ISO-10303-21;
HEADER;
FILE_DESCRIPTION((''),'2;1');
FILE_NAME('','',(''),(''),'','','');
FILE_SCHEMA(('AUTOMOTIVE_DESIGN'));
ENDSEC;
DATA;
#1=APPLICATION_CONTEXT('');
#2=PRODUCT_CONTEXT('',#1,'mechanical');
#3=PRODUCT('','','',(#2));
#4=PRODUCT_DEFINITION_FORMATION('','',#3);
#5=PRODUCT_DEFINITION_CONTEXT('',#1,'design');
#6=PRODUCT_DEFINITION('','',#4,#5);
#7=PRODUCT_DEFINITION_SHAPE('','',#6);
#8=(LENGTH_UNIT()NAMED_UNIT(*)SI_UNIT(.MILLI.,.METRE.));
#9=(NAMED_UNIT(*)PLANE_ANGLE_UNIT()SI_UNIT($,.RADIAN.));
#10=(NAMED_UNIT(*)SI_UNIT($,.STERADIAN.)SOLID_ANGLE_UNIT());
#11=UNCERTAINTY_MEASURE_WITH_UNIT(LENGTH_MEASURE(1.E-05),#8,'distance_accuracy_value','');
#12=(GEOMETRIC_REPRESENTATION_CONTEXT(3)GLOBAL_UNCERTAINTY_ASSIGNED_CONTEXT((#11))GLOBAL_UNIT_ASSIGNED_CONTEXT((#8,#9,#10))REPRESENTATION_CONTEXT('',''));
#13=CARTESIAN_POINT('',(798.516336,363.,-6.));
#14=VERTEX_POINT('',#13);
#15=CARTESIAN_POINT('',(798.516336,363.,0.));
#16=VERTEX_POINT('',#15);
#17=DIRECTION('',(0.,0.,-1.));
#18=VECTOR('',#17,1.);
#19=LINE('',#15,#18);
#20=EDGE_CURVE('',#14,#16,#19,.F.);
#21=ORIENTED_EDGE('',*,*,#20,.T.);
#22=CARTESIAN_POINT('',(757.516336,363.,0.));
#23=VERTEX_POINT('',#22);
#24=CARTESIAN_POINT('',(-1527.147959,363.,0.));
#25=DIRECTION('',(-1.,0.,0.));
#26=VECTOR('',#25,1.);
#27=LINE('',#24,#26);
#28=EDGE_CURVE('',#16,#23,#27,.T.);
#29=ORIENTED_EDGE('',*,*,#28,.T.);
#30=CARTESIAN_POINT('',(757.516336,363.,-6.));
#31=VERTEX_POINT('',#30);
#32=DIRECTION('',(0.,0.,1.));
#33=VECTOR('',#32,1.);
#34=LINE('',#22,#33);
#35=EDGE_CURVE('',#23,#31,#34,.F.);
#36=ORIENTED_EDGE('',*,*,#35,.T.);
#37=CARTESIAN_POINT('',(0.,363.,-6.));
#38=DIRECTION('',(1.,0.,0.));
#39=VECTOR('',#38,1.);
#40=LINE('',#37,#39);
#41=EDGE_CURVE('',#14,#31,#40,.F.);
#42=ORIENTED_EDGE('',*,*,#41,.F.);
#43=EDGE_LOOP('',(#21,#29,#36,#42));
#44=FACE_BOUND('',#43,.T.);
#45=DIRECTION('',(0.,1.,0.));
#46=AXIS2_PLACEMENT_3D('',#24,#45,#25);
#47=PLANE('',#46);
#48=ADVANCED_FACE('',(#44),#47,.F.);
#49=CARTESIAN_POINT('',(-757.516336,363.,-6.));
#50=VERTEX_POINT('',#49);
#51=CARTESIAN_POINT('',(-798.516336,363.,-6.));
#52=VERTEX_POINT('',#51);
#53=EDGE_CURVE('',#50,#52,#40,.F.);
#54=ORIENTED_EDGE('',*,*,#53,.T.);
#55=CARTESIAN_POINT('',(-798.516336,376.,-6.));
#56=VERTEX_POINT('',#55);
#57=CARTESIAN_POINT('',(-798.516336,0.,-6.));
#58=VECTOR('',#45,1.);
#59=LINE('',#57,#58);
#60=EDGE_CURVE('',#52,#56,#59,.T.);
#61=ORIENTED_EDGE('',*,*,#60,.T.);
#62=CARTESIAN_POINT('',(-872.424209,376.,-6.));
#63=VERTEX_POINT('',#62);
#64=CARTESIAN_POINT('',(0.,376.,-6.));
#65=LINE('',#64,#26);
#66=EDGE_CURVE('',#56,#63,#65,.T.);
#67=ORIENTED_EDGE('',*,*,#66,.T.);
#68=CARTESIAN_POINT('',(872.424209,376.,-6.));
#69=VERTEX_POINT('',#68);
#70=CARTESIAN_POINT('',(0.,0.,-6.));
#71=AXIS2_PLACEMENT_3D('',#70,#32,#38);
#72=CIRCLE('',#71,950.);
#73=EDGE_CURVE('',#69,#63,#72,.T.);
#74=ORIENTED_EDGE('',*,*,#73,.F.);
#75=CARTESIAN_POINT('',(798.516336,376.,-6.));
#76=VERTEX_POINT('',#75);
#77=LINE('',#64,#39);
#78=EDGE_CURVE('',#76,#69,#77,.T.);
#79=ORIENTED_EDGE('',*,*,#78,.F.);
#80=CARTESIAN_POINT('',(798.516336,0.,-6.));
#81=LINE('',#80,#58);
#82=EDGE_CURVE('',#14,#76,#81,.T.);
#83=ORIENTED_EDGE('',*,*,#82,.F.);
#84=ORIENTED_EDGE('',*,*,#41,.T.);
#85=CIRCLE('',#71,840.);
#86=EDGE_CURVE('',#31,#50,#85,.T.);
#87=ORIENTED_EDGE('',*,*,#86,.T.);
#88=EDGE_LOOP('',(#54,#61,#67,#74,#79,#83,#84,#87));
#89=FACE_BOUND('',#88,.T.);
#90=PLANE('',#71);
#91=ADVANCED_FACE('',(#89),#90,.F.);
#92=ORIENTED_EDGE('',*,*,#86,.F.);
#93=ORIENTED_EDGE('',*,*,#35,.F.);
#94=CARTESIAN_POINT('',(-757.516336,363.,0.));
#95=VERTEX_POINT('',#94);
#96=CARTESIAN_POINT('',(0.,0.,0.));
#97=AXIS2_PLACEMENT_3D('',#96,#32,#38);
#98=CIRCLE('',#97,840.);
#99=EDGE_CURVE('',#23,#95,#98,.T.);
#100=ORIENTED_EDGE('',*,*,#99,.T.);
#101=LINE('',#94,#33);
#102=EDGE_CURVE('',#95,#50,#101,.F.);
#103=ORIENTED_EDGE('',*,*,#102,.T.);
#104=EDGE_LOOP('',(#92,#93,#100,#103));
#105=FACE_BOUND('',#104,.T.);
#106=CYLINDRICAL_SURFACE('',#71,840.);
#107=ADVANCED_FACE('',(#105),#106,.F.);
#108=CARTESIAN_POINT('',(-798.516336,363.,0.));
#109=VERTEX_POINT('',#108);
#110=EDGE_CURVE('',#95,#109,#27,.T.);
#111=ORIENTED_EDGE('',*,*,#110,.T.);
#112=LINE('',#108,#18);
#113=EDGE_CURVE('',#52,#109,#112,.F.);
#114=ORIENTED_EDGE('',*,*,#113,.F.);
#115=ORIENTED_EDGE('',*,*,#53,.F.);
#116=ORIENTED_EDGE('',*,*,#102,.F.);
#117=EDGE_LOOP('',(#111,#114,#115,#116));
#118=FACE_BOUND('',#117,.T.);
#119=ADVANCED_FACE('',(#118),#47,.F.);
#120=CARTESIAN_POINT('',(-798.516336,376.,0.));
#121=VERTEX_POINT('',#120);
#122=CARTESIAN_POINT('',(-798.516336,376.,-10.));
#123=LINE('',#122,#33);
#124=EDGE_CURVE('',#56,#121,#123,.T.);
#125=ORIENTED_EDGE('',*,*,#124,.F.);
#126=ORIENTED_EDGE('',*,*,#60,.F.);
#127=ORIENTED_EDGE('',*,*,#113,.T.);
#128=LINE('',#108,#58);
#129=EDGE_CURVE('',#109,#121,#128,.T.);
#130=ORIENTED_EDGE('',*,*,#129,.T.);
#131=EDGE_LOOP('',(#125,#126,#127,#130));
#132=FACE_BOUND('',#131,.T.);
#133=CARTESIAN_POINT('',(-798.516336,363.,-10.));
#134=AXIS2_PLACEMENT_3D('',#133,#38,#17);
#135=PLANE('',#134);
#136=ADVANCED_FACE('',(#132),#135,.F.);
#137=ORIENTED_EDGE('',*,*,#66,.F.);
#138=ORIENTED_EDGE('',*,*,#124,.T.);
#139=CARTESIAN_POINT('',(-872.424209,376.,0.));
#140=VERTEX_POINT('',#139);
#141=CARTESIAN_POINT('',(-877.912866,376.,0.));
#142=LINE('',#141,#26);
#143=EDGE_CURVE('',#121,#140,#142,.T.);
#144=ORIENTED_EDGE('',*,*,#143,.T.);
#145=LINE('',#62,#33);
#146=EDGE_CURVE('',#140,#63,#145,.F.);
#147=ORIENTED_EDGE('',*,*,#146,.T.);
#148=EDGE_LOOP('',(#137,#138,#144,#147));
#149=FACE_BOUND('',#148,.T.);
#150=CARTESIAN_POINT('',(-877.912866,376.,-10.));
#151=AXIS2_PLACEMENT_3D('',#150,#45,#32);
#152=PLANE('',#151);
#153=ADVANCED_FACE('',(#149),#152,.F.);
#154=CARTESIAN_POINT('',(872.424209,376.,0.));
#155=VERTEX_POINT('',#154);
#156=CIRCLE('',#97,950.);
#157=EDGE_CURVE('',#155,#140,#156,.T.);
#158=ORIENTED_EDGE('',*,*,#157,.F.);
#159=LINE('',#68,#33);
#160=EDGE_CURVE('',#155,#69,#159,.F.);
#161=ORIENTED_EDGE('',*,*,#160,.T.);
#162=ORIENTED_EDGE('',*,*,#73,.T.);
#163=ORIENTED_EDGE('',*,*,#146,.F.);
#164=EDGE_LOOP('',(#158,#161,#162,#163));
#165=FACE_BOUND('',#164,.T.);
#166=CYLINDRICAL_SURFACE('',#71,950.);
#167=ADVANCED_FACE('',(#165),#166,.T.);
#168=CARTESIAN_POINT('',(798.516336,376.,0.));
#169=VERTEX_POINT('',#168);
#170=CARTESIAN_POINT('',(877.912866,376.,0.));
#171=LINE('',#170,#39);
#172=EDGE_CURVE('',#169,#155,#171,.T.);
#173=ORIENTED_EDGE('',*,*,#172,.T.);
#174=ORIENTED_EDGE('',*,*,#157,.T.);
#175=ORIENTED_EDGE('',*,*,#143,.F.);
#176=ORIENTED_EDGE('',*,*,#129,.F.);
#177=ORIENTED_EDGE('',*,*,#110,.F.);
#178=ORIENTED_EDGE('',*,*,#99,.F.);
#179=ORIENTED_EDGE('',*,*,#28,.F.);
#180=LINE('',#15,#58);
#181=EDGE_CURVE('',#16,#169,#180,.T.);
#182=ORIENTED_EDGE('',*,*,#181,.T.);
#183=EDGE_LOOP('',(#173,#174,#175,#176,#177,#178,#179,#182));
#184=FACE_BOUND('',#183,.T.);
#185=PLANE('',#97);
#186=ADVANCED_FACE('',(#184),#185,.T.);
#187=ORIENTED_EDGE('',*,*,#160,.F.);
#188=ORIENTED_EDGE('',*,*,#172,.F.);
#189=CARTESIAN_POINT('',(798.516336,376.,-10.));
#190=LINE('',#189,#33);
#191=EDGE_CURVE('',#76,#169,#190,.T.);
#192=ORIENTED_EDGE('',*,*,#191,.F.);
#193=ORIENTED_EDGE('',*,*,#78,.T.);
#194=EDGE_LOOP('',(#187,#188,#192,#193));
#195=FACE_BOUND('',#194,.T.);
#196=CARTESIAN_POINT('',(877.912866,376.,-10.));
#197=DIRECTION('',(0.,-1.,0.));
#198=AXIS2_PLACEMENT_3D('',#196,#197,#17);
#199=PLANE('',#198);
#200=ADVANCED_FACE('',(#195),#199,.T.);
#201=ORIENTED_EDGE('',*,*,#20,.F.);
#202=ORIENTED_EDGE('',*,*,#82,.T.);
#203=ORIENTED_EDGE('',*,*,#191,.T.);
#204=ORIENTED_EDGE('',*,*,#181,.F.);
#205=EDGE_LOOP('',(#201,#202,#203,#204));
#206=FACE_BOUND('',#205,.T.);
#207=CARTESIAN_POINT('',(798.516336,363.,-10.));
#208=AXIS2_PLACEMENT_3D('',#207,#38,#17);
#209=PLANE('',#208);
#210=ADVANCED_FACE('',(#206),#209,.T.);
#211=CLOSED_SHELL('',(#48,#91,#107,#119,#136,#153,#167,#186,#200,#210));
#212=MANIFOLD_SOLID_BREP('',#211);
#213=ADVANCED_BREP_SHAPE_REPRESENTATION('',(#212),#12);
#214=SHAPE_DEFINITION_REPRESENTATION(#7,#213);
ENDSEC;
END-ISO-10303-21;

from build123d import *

# Parameters (mm, degrees)
SKETCH1_R          = 950
SKETCH1_R_2        = 840
BASE_FLANGE1_DEPTH = 6
SKETCH6_W          = 2732.981099596
SKETCH6_H          = 1353.854573776
CUT_EXTRUDE1_DEPTH = 10
SKETCH8_W          = 79.396529378
SKETCH8_H          = 13
CUT_EXTRUDE2_DEPTH = 10


# Sheet-metal steps are written as plain solids
with BuildPart() as part:
    # Sketch1 → Base-Flange1 (new body)
    with BuildSketch(Plane.XY):
        Circle(SKETCH1_R)
        Circle(SKETCH1_R_2, mode=Mode.SUBTRACT)
    extrude(amount=-BASE_FLANGE1_DEPTH)

    # Sketch6 → Cut-Extrude1 (cut)
    with BuildSketch(Plane.XY):
        with Locations((-160.657409421, -313.927286888)):
            Rectangle(SKETCH6_W, SKETCH6_H)
    extrude(amount=-CUT_EXTRUDE1_DEPTH, mode=Mode.SUBTRACT)

    # Sketch8 → Cut-Extrude2 (cut)
    with BuildSketch(Plane.XY):
        with Locations((-838.214601147, 369.5)):
            Rectangle(SKETCH8_W, SKETCH8_H)
    cut_extrude2 = extrude(amount=-CUT_EXTRUDE2_DEPTH, mode=Mode.SUBTRACT)

    # Mirror1: Cut-Extrude2 across plane
    add(cut_extrude2.mirror(Plane(origin=(0, 0, 0), x_dir=(0, 0, 1), z_dir=(1, 0, 0))), mode=Mode.SUBTRACT)


solid = part.part
